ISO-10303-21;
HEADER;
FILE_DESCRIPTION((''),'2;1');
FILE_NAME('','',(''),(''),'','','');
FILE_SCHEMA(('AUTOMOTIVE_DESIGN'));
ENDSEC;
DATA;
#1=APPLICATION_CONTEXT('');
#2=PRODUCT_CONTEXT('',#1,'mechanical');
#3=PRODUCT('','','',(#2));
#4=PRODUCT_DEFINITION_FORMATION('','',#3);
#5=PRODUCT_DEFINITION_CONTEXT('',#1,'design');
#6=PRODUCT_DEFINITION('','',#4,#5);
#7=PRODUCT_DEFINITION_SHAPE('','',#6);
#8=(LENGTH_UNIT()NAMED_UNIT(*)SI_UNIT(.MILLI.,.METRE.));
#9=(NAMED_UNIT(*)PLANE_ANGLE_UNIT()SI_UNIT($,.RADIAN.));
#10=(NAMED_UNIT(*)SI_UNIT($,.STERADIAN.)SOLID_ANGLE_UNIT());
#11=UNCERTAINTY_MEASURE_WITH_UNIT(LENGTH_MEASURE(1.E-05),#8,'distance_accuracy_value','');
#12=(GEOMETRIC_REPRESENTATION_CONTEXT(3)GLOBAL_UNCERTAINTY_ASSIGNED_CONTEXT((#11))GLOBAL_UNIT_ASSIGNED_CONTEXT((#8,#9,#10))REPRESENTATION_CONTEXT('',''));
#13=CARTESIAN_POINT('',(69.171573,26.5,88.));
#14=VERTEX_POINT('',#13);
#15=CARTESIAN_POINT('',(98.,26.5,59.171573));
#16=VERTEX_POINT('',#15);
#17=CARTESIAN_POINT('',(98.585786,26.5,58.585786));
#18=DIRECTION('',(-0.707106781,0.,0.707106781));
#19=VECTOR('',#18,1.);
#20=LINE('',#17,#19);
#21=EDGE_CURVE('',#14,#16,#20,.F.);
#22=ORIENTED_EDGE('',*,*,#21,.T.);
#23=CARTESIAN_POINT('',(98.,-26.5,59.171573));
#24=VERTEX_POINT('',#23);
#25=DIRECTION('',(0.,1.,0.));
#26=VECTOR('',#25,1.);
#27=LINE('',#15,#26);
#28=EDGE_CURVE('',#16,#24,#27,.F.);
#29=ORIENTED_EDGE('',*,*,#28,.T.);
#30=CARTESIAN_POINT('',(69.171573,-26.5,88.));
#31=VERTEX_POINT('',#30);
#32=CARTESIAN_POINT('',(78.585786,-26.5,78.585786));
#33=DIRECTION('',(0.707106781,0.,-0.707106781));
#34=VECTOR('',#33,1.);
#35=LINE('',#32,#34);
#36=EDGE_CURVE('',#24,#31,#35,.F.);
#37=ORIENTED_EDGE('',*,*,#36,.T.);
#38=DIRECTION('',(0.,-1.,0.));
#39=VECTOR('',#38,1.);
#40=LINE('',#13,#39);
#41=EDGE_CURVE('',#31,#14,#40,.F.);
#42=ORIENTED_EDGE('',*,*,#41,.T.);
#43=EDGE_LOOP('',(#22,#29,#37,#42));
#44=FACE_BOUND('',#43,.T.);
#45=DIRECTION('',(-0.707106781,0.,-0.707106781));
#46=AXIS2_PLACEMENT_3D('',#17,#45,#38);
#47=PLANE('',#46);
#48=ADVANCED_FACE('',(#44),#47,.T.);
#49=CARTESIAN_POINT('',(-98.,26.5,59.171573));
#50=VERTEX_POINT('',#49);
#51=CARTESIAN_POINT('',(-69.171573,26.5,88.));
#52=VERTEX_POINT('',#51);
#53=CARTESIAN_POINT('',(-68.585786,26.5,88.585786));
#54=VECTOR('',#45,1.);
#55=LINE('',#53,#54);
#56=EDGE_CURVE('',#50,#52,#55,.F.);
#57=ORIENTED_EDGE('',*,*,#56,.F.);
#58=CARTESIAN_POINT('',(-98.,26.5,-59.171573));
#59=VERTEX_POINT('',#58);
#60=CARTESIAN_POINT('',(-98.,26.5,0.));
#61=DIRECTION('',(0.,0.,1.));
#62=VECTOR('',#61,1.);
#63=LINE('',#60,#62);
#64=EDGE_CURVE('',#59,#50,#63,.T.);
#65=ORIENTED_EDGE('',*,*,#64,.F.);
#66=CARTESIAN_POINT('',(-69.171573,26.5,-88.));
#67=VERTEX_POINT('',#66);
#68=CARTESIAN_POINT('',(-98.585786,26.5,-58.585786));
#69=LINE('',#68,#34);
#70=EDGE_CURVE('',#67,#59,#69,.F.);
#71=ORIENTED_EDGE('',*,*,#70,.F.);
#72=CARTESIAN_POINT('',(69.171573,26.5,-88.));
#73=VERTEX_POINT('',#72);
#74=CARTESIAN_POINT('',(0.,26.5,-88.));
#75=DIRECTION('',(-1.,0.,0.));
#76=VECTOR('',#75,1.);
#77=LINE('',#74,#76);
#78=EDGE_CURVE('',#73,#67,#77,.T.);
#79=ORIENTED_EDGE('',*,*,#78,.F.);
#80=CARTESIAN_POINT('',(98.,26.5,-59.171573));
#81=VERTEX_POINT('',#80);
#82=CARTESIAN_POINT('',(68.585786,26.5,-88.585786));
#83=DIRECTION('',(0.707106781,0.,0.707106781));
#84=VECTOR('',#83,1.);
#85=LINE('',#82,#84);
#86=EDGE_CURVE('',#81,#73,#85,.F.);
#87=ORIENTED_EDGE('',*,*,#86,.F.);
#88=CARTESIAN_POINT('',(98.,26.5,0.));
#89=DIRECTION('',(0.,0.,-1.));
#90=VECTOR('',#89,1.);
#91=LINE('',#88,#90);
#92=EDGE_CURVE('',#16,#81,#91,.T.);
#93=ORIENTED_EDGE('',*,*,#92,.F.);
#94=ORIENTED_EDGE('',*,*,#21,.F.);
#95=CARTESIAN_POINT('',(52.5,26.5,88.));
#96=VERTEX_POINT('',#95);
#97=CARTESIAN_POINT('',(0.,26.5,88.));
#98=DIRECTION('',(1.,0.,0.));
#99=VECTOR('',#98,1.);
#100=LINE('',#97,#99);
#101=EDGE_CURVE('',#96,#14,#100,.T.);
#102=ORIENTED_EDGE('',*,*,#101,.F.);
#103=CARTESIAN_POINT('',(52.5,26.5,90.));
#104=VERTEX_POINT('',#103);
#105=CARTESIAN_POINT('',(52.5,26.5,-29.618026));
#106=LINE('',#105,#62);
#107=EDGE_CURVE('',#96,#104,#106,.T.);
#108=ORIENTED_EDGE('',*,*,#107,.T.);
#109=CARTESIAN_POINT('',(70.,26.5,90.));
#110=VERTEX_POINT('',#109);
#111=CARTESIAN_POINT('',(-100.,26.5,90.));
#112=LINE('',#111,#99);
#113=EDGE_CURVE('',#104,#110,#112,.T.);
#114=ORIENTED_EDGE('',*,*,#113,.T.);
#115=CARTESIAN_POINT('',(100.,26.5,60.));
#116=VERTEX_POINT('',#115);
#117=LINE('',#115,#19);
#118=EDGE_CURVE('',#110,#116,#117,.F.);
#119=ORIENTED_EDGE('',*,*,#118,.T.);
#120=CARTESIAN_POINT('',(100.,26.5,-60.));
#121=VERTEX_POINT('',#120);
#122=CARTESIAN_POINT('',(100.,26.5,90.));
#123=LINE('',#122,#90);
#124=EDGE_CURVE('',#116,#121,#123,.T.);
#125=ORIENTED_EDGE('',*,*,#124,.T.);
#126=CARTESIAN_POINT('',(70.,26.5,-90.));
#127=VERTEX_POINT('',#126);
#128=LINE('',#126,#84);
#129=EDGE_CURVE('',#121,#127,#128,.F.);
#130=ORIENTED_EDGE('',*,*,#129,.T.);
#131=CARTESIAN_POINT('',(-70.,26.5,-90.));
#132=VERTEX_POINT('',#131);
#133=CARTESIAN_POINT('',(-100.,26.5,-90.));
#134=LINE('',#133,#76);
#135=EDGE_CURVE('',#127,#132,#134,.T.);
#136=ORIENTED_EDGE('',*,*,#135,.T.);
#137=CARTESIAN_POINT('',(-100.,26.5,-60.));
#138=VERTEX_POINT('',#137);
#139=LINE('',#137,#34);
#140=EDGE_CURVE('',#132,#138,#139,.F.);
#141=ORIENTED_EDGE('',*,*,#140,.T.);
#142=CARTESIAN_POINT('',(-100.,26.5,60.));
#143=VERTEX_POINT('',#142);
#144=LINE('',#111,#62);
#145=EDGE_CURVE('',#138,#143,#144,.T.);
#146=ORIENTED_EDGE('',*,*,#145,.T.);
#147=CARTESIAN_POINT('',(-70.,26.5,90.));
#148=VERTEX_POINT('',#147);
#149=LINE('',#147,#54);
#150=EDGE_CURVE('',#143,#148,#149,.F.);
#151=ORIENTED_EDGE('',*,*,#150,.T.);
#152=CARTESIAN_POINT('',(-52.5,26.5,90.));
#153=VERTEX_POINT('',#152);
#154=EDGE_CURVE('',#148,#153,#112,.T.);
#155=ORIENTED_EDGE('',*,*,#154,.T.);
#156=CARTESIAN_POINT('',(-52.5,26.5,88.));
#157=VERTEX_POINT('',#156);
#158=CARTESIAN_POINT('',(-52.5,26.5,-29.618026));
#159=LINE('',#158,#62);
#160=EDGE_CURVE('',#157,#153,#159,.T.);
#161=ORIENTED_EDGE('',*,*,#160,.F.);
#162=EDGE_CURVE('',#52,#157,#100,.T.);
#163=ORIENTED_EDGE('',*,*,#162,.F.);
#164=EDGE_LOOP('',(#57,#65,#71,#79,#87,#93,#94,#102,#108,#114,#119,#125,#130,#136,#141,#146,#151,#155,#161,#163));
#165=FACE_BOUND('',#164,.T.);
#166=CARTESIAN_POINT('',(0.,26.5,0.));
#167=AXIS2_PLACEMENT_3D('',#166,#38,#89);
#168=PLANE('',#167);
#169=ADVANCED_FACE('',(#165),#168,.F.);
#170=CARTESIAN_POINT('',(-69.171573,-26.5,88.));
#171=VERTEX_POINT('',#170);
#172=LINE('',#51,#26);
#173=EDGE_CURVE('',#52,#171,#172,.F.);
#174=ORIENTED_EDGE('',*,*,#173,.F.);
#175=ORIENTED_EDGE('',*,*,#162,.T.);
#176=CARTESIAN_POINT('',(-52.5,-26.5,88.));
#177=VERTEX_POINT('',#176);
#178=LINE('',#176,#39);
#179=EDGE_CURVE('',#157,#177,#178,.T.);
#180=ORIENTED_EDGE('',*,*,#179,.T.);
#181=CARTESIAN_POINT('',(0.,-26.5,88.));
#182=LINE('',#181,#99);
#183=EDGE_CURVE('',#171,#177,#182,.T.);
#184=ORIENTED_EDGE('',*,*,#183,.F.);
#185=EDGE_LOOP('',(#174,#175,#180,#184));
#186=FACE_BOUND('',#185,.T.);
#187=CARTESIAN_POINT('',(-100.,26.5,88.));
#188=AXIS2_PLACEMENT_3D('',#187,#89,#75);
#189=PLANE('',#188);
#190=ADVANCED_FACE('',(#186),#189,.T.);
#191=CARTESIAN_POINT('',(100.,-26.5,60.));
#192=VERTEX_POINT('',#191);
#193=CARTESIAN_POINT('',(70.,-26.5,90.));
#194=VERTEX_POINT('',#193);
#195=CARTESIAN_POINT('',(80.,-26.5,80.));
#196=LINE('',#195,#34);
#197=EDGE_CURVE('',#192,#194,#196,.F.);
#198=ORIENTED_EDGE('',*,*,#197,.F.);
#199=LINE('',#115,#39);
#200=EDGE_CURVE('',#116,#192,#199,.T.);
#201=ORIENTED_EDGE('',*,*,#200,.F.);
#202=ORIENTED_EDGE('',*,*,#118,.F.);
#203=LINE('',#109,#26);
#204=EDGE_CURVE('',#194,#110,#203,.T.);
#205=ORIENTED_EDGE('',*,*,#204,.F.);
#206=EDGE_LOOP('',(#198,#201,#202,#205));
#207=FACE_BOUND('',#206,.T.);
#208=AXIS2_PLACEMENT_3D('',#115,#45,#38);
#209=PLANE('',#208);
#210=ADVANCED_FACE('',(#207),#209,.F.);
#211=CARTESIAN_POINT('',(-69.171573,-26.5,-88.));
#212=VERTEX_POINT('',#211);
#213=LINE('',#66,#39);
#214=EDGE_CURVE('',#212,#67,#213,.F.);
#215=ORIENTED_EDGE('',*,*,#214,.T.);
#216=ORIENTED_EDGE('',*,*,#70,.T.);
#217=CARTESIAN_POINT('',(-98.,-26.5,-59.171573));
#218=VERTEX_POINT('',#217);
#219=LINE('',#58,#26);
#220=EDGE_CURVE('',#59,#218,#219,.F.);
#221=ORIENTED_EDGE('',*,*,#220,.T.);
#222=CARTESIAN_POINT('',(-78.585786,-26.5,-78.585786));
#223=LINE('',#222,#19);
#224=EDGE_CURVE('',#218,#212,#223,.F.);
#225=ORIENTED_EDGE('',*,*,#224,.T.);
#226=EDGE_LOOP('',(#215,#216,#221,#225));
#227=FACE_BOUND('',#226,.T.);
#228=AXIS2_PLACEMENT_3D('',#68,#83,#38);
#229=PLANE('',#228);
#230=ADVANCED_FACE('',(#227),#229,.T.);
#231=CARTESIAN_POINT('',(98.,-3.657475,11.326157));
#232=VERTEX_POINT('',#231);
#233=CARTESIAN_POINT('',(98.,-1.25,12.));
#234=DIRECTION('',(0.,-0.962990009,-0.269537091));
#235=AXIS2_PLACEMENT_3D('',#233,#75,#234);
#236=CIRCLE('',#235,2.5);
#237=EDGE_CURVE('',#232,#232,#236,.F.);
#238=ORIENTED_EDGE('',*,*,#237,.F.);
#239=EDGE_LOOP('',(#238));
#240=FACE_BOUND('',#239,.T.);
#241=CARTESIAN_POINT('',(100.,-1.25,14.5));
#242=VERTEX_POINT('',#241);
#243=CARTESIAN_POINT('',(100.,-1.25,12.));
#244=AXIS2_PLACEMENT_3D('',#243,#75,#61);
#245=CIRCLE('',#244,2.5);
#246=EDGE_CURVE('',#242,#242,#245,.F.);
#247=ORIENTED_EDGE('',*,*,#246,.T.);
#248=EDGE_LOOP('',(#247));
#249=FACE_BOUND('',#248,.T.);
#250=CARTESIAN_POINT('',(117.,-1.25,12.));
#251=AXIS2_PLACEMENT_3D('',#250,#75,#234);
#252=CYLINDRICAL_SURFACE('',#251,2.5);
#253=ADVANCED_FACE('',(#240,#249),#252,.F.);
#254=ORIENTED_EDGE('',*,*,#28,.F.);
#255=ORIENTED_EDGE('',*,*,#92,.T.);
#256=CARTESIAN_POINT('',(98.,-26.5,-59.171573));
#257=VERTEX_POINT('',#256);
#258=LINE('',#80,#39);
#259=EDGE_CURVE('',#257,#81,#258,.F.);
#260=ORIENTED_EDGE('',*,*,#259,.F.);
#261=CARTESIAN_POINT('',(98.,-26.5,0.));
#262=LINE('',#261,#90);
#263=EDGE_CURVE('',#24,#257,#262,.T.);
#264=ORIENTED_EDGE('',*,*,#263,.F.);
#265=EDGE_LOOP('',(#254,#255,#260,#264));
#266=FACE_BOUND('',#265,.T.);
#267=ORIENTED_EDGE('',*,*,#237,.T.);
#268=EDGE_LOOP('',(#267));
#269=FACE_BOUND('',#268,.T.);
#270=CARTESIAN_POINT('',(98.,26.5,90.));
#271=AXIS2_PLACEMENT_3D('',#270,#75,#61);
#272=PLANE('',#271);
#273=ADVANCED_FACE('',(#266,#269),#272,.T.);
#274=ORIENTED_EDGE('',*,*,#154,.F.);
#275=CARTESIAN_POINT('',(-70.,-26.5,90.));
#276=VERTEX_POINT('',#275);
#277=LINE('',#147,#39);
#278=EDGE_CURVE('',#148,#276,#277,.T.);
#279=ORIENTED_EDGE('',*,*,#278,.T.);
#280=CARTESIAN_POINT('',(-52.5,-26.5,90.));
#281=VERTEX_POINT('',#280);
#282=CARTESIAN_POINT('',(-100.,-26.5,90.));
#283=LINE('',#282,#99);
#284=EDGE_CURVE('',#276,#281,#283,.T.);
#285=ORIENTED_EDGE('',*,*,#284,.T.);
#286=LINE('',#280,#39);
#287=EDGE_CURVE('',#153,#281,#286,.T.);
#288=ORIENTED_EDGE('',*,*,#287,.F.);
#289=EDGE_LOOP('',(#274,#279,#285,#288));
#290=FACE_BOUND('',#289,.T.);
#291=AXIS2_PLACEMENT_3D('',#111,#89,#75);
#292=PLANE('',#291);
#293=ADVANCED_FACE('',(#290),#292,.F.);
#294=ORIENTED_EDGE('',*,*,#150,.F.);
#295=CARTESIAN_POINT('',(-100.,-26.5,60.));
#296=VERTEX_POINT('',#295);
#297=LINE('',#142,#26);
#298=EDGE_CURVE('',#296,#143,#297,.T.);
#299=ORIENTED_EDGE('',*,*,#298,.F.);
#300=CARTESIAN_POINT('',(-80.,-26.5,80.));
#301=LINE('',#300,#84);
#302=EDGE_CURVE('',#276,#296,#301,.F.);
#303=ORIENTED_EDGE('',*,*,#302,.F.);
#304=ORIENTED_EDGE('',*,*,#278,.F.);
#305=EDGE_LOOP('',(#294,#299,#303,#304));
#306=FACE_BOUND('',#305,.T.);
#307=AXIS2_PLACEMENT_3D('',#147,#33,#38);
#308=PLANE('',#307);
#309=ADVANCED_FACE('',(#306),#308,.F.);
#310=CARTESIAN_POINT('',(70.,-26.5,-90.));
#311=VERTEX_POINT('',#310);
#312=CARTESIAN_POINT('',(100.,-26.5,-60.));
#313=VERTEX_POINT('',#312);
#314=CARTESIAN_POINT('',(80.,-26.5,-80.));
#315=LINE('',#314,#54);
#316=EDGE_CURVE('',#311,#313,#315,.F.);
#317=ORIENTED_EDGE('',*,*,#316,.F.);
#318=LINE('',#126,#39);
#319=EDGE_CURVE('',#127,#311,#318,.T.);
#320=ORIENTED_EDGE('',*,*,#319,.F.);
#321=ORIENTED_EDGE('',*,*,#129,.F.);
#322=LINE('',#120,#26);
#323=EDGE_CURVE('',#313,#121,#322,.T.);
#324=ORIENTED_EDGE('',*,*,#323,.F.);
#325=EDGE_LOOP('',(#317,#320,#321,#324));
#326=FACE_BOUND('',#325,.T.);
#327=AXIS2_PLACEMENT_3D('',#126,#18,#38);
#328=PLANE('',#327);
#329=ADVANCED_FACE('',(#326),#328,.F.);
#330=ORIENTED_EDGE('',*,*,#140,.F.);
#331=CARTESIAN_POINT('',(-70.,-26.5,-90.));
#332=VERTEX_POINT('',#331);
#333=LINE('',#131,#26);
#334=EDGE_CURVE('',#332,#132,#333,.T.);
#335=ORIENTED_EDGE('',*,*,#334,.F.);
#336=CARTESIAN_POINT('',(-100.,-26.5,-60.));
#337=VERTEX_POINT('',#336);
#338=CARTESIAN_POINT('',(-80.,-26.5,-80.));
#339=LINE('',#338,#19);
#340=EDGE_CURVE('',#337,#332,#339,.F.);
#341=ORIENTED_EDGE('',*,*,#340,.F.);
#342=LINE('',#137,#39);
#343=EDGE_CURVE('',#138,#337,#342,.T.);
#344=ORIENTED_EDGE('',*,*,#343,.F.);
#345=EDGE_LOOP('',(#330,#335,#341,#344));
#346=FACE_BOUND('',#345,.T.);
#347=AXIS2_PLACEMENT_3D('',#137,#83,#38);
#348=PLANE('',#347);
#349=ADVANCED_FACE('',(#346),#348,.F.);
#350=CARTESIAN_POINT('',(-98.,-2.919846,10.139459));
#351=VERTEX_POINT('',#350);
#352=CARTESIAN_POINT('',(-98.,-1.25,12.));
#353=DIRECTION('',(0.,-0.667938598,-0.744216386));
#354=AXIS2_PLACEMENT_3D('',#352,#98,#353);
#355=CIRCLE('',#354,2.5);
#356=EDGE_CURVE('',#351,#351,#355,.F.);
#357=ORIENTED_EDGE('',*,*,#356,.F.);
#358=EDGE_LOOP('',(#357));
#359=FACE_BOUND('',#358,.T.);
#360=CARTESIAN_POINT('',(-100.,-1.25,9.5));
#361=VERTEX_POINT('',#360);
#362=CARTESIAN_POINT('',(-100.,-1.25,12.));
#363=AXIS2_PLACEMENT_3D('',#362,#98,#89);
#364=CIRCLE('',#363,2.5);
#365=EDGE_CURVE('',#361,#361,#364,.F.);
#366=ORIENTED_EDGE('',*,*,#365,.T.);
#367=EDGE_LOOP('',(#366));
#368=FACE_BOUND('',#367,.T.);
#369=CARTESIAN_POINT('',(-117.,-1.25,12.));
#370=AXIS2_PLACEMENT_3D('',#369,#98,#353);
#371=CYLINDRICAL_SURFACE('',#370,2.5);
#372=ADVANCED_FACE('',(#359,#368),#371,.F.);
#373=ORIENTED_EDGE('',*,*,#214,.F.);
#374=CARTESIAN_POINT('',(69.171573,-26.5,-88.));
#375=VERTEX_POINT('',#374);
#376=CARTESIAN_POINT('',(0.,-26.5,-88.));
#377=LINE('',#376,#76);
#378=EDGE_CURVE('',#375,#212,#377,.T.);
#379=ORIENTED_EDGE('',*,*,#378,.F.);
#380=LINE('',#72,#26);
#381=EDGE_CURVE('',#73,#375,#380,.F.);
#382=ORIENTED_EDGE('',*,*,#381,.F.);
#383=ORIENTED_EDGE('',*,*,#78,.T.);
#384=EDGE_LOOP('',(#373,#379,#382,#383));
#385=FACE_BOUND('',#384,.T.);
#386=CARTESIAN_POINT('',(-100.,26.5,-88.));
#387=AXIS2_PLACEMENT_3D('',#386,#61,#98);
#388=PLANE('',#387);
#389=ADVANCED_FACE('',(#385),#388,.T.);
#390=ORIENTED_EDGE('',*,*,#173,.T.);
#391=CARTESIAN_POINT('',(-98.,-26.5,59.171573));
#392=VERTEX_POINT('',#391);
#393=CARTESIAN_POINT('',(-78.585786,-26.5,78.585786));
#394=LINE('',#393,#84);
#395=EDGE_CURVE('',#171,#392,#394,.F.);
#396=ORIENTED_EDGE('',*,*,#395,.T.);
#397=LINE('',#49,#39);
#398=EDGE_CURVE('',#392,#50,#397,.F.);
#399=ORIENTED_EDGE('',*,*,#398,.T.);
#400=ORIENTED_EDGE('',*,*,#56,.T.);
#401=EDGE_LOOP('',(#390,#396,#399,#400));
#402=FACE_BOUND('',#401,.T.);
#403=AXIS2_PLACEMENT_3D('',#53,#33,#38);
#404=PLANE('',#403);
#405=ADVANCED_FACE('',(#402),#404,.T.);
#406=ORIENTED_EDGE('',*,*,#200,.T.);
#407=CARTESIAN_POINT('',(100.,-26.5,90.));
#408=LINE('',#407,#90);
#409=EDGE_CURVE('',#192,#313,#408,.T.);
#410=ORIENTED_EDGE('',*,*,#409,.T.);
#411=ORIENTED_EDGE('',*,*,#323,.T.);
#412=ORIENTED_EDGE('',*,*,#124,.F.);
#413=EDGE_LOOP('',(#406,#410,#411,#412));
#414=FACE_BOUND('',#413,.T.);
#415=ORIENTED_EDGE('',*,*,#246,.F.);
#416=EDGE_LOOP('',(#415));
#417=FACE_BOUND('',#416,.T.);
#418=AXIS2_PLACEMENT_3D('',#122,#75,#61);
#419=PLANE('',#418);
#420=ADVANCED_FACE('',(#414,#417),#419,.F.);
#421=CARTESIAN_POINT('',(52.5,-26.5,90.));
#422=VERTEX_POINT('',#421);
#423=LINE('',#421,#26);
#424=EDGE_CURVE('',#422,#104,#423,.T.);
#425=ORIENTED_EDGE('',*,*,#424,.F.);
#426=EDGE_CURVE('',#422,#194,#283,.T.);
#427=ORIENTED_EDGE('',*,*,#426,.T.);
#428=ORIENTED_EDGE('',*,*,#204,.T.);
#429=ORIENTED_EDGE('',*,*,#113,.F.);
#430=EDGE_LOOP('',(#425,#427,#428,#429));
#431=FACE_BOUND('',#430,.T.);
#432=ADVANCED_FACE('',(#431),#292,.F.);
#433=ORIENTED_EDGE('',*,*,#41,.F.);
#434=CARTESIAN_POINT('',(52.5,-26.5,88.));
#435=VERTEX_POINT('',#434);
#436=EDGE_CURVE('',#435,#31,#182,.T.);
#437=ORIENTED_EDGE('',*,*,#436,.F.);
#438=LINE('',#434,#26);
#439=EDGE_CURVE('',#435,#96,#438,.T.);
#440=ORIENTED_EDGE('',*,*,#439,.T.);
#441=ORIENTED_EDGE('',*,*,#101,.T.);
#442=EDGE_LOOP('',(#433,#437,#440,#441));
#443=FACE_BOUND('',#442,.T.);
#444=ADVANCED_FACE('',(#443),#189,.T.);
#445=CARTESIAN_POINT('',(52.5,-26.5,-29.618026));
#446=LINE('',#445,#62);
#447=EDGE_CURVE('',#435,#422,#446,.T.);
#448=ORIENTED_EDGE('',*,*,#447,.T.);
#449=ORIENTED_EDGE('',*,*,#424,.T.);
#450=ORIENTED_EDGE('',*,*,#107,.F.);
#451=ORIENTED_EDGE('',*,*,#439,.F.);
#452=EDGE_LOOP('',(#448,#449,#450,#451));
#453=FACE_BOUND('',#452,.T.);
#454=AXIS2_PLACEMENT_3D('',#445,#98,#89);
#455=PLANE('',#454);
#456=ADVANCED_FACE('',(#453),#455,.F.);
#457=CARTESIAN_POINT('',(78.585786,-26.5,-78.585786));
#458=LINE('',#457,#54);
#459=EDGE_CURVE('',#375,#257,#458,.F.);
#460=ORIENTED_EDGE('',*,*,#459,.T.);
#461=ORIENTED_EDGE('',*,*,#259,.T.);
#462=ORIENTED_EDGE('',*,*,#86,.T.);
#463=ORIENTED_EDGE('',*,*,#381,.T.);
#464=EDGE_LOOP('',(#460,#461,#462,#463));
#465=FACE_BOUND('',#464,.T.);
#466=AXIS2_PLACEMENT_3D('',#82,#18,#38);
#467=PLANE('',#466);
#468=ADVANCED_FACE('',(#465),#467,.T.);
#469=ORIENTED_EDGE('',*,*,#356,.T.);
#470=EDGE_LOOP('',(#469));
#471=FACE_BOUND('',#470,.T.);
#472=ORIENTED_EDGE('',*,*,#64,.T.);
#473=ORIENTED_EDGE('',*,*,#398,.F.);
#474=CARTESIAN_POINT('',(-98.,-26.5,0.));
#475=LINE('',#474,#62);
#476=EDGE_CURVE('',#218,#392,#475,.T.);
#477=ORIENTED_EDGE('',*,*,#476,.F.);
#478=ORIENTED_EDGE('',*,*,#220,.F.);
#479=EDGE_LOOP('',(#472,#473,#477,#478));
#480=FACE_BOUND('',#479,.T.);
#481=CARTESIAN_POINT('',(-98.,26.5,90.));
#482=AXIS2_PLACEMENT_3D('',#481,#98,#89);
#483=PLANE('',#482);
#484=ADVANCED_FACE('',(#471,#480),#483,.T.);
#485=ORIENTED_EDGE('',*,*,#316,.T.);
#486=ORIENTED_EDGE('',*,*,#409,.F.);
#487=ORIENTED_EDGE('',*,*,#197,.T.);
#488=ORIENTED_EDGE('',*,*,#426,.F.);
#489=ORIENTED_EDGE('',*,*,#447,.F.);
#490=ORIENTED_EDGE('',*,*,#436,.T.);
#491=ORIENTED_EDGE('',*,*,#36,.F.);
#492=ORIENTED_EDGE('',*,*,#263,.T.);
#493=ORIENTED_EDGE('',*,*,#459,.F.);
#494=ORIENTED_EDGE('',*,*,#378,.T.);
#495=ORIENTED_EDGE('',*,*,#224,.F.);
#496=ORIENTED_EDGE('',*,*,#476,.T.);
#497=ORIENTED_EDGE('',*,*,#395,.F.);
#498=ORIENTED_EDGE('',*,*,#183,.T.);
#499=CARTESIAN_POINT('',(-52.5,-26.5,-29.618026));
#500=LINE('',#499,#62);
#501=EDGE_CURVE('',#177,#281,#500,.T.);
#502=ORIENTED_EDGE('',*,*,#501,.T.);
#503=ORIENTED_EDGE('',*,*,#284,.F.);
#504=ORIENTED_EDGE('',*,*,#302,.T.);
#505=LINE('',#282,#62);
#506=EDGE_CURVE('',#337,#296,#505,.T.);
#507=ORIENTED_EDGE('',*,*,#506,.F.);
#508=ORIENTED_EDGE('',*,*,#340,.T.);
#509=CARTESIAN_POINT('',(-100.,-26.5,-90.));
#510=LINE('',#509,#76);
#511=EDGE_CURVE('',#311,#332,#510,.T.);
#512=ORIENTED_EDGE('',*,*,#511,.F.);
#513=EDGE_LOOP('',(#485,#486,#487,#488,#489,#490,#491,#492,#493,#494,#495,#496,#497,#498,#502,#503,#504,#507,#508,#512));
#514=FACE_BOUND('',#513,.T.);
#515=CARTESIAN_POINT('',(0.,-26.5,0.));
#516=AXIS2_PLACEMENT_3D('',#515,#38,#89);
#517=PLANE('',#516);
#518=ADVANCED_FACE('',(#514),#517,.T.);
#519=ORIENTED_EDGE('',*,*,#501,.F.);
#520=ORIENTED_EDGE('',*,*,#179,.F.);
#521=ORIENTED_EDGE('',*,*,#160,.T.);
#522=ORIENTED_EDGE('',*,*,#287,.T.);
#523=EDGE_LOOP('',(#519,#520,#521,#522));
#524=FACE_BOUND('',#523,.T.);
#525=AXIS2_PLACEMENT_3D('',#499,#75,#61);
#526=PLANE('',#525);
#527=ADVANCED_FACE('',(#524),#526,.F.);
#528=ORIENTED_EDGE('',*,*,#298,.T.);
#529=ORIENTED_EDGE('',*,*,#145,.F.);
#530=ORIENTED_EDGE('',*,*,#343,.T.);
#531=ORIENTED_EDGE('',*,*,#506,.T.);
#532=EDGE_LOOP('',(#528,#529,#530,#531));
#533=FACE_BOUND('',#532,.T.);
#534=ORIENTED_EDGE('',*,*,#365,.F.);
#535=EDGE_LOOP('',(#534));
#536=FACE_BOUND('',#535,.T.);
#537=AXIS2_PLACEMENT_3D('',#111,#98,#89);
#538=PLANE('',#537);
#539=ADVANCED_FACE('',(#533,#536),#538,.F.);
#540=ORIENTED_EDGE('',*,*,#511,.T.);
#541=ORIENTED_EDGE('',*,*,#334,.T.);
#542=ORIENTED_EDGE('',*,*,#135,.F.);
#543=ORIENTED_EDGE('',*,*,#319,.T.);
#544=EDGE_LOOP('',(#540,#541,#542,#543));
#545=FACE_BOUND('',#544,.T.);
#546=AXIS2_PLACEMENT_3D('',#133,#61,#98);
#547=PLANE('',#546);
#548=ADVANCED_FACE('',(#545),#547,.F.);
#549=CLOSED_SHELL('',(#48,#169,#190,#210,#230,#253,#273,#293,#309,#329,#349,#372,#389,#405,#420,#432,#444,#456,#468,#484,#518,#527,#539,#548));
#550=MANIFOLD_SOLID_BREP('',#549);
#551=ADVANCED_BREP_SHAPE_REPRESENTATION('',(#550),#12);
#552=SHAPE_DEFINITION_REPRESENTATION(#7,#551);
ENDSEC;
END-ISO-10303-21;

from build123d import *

# Parameters (mm, degrees)
ESBO_O1_W                = 200
ESBO_O1_H                = 180
RESSALTO_EXTRUS_O1_DEPTH = 26.5
CHANFRO1_SIZE            = 30
CASCA1_T                 = -2
ESBO_O2_W                = 105
ESBO_O2_H                = 53
CORTE_EXTRUS_O1_DEPTH    = 2
CAVIDADE1_START          = -100
CAVIDADE1_OUTLINE_R      = 2.5
CAVIDADE1_DEPTH          = 200


# Read off the part's stored shape, not the designer's step: Cavidade1
with BuildPart() as part:
    # Esboço1 → Ressalto-extrusão1 (new, symmetric)
    with BuildSketch(Plane(origin=(0, 0, 0), x_dir=(1, 0, 0), z_dir=(0, 1, 0))):
        Rectangle(ESBO_O1_W, ESBO_O1_H)
    extrude(amount=RESSALTO_EXTRUS_O1_DEPTH, both=True)

    # Chanfro1
    chanfro1_edges = [part.edges().sort_by_distance(p)[0] for p in [
        (100, 0, 90),
        (-100, 0, 90),
        (-100, 0, -90),
        (100, 0, -90),
    ]]
    chamfer(chanfro1_edges, length=CHANFRO1_SIZE)

    # Casca1
    casca1_openings = [part.faces().sort_by_distance(p)[0] for p in [
        (0, 26.5, 0),
        (0, -26.5, 0),
    ]]
    offset(amount=CASCA1_T, openings=casca1_openings, kind=Kind.INTERSECTION)

    # Esboço2 → Corte-extrusão1 (cut)
    with BuildSketch(Plane.XY.offset(90)):
        Rectangle(ESBO_O2_W, ESBO_O2_H)
    extrude(amount=-CORTE_EXTRUS_O1_DEPTH, mode=Mode.SUBTRACT)

    # Cavidade1 outline → Cavidade1 (cut)
    with BuildSketch(Plane.YZ.offset(CAVIDADE1_START)):
        with Locations((-1.25, 12)):
            Circle(CAVIDADE1_OUTLINE_R)
    extrude(amount=CAVIDADE1_DEPTH, mode=Mode.SUBTRACT)


solid = part.part
